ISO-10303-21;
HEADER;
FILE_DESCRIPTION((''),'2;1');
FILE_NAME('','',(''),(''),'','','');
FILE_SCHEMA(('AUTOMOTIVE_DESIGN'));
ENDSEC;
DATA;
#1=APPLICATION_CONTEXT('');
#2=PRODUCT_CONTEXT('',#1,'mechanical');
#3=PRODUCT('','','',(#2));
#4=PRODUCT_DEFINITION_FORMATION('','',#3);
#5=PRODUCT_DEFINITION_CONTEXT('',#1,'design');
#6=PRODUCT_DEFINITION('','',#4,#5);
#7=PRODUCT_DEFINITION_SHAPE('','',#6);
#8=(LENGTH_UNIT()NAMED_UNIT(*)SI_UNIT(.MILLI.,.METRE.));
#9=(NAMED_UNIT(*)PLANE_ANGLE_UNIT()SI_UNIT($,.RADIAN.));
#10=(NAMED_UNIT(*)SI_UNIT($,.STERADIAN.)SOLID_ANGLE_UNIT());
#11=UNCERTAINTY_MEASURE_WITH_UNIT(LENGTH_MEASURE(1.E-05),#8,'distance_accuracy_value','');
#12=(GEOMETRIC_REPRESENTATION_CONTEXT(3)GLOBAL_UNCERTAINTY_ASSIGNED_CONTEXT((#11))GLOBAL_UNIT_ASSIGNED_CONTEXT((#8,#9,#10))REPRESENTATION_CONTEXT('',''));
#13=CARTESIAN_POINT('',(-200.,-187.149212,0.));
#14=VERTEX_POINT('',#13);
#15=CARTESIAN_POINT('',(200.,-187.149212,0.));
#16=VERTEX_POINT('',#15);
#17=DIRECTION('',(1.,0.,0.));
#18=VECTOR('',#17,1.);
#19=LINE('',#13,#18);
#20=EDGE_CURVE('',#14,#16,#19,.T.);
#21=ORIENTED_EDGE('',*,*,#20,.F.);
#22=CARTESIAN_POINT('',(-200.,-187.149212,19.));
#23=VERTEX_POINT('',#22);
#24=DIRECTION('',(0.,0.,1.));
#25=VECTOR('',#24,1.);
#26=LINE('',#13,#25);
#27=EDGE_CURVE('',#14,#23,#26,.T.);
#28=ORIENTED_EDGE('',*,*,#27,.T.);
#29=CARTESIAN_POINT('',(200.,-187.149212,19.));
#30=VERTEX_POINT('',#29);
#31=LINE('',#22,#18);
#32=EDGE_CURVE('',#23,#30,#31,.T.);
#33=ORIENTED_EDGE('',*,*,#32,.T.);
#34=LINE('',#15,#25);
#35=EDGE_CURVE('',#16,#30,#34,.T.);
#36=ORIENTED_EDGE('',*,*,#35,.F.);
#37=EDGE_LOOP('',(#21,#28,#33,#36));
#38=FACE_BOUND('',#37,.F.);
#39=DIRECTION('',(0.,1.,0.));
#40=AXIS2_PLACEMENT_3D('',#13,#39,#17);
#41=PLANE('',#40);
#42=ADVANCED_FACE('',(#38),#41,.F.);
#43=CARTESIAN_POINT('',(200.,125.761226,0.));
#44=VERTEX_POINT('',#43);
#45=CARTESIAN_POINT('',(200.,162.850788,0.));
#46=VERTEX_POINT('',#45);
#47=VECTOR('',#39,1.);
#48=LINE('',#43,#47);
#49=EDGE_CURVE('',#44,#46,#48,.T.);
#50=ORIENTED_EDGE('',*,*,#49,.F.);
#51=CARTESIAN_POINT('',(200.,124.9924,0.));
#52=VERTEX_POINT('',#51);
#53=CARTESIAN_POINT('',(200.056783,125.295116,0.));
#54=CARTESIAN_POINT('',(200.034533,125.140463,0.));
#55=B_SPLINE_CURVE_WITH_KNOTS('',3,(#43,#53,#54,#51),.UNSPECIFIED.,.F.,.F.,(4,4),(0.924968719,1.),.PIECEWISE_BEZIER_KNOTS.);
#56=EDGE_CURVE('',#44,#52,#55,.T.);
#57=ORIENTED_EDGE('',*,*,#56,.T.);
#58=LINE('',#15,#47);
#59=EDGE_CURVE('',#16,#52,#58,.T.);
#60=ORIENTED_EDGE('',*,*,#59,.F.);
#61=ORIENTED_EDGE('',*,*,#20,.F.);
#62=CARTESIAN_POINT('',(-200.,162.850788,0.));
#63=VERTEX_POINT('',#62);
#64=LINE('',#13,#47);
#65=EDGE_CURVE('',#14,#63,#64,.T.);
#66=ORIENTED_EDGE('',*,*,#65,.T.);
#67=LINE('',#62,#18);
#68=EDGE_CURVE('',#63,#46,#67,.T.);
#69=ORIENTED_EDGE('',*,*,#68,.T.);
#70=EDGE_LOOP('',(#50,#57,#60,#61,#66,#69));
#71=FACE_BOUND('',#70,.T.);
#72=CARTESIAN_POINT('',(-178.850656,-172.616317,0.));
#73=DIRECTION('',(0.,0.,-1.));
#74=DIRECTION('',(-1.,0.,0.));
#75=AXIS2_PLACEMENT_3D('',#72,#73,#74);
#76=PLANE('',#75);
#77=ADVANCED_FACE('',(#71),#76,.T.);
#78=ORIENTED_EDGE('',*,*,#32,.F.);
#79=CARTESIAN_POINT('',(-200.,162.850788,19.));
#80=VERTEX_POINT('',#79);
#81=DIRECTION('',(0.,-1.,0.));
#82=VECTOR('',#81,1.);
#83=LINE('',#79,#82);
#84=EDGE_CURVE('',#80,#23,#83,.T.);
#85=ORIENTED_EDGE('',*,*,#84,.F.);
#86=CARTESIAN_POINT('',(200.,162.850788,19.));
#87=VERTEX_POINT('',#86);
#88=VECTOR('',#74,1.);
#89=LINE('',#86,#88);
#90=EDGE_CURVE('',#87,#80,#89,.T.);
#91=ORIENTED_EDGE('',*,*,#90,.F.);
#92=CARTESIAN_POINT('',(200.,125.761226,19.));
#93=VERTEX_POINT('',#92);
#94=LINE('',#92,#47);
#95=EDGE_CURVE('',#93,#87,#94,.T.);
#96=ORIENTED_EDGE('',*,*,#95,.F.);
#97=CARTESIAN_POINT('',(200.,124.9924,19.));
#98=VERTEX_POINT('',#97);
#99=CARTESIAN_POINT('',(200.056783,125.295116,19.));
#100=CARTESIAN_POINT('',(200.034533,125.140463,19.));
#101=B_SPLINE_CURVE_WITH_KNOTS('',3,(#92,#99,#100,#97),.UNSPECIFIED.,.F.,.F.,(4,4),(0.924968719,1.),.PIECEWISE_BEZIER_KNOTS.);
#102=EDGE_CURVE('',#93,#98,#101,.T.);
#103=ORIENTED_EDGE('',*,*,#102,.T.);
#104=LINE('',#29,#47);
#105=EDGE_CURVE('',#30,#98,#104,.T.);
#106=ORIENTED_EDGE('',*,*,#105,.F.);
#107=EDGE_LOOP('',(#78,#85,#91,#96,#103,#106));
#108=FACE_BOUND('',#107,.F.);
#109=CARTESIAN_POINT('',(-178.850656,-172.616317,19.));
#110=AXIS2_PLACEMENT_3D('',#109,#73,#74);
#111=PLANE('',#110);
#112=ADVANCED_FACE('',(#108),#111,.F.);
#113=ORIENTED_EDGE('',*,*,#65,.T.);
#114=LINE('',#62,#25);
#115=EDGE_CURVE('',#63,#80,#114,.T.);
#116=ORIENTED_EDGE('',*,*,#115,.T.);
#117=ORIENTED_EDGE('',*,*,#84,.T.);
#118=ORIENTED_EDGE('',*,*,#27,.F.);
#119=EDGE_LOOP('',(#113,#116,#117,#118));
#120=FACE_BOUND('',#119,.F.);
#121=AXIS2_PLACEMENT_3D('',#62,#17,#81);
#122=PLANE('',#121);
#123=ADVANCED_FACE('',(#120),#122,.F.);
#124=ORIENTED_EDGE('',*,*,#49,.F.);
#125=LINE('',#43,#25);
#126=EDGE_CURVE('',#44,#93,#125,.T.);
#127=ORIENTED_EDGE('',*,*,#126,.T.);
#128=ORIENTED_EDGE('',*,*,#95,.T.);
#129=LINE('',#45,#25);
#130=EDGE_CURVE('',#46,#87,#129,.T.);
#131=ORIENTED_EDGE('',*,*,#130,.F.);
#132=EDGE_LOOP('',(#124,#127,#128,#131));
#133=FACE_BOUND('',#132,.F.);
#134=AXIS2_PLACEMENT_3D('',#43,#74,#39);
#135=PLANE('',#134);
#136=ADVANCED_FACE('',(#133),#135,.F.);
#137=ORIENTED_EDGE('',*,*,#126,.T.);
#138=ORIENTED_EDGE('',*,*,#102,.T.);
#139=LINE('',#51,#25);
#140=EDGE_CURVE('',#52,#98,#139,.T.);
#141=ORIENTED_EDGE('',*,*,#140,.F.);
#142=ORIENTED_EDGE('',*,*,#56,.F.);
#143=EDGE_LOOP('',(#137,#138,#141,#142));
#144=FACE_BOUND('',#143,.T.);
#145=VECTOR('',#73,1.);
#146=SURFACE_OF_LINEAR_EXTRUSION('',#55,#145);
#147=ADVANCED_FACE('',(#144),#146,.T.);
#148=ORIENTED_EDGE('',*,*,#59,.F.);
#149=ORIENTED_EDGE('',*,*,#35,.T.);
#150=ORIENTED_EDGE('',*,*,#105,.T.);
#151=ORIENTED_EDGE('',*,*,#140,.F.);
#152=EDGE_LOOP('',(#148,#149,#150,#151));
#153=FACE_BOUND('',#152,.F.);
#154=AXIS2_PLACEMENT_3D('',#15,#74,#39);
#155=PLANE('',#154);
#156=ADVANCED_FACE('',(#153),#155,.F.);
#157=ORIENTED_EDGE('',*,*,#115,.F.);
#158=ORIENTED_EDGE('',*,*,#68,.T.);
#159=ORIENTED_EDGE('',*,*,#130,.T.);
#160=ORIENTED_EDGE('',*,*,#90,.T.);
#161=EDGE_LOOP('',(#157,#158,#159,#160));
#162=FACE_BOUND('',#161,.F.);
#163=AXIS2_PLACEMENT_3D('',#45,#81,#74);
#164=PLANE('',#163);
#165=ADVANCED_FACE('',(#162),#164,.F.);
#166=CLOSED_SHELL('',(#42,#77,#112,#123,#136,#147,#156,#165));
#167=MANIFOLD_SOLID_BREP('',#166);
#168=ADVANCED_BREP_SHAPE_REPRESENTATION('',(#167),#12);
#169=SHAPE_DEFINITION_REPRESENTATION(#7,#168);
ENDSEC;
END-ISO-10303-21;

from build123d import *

# Parameters (mm, degrees)
F1_DEPTH = 19
F2_DEPTH = 548
F3_DEPTH = 548


# Not quite as in the source:
# - an extrude ends at something that could not be found from the text; its depth is read off the source's solid


with BuildPart() as f1:
    # F0 (on Top) → F1 (new body)
    with BuildSketch(Plane.XY):
        with BuildLine():
            add(Edge.make_bspline(
                [(-200, -132.6209452411), (-200, -154.8058367287), (-187.1411707237, -172.3375741418), (-168.017625666, -187.1492117643), (-133.0151869916, -187.1492117643)],
                knots=[0, 0, 0, 0, 0.4562793143, 1, 1, 1, 1], degree=3))
            Line((-200, -132.6209452411), (-200, -187.1492117643))
            Line((-200, -187.1492117643), (-133.0151869916, -187.1492117643))
        make_face()
        with BuildLine():
            Line((200, -187.1492117643), (200, -133.3316862583))
            add(Edge.make_bspline(
                [(200, -133.3316862583), (196.8726040376, -145.854416396), (194.7195639705, -177.063078406), (166.3433221251, -183.7126432901), (157.4708074331, -187.1492117643)],
                knots=[0, 0, 0, 0, 0.5227747717, 1, 1, 1, 1], degree=3))
            Line((157.4708074331, -187.1492117643), (200, -187.1492117643))
        make_face()
        with BuildLine():
            add(Edge.make_bspline(
                [(200, 125.7612258196), (200.0567834577, 125.2951155246), (200.0345329904, 125.1404634173), (200, 124.9924004078)],
                knots=[0.9249687191, 0.9249687191, 0.9249687191, 0.9249687191, 1, 1, 1, 1], degree=3))
            Line((200, 125.7612258196), (200, 124.9924004078))
        make_face()
        with BuildLine():
            add(Edge.make_bspline(
                [(159.7772687674, 162.8507882357), (169.0774328446, 160.2876502356), (193.3291623418, 156.440564551), (199.6711808851, 128.4603565342), (200, 125.7612258196)],
                knots=[0, 0, 0, 0, 0.4904809229, 0.9249687191, 0.9249687191, 0.9249687191, 0.9249687191], degree=3))
            Line((159.7772687674, 162.8507882357), (-153.6801122603, 162.8507882357))
            add(Edge.make_bspline(
                [(-200, 104.9124646716), (-200, 131.7387589341), (-185.8746875729, 148.9797410683), (-171.5849838132, 162.8507882357), (-153.6801122603, 162.8507882357)],
                knots=[0, 0, 0, 0, 0.5414752597, 1, 1, 1, 1], degree=3))
            Line((-200, 104.9124646716), (-200, -132.6209452411))
            add(Edge.make_bspline(
                [(-200, -132.6209452411), (-200, -154.8058367287), (-187.1411707237, -172.3375741418), (-168.017625666, -187.1492117643), (-133.0151869916, -187.1492117643)],
                knots=[0, 0, 0, 0, 0.4562793143, 1, 1, 1, 1], degree=3))
            Line((-133.0151869916, -187.1492117643), (157.4708074331, -187.1492117643))
            add(Edge.make_bspline(
                [(200, -133.3316862583), (196.8726040376, -145.854416396), (194.7195639705, -177.063078406), (166.3433221251, -183.7126432901), (157.4708074331, -187.1492117643)],
                knots=[0, 0, 0, 0, 0.5227747717, 1, 1, 1, 1], degree=3))
            Line((200, -133.3316862583), (200, 124.9924004078))
            Line((200, 124.9924004078), (200, 125.7612258196))
        make_face()
        with BuildLine():
            add(Edge.make_bspline(
                [(-200, 104.9124646716), (-200, 131.7387589341), (-185.8746875729, 148.9797410683), (-171.5849838132, 162.8507882357), (-153.6801122603, 162.8507882357)],
                knots=[0, 0, 0, 0, 0.5414752597, 1, 1, 1, 1], degree=3))
            Line((-153.6801122603, 162.8507882357), (-200, 162.8507882357))
            Line((-200, 162.8507882357), (-200, 104.9124646716))
        make_face()
        with BuildLine():
            Line((200, 125.7612258196), (200, 162.8507882357))
            Line((200, 162.8507882357), (159.7772687674, 162.8507882357))
            add(Edge.make_bspline(
                [(159.7772687674, 162.8507882357), (169.0774328446, 160.2876502356), (193.3291623418, 156.440564551), (199.6711808851, 128.4603565342), (200, 125.7612258196)],
                knots=[0, 0, 0, 0, 0.4904809229, 0.9249687191, 0.9249687191, 0.9249687191, 0.9249687191], degree=3))
        make_face()
    extrude(amount=F1_DEPTH)

    # F0 (on Top) → F2 (cut, through all)
    with BuildSketch(Plane.XY):
        with BuildLine():
            add(Edge.make_bspline(
                [(-200, -132.6209452411), (-200, -154.8058367287), (-187.1411707237, -172.3375741418), (-168.017625666, -187.1492117643), (-133.0151869916, -187.1492117643)],
                knots=[0, 0, 0, 0, 0.4562793143, 1, 1, 1, 1], degree=3))
            Line((-200, -132.6209452411), (-200, -187.1492117643))
            Line((-200, -187.1492117643), (-133.0151869916, -187.1492117643))
        make_face()
    extrude(amount=-F2_DEPTH, mode=Mode.SUBTRACT)

    # F0 (on Top) → F3 (cut, through all)
    with BuildSketch(Plane.XY):
        with BuildLine():
            add(Edge.make_bspline(
                [(-200, 104.9124646716), (-200, 131.7387589341), (-185.8746875729, 148.9797410683), (-171.5849838132, 162.8507882357), (-153.6801122603, 162.8507882357)],
                knots=[0, 0, 0, 0, 0.5414752597, 1, 1, 1, 1], degree=3))
            Line((-153.6801122603, 162.8507882357), (-200, 162.8507882357))
            Line((-200, 162.8507882357), (-200, 104.9124646716))
        make_face()
    extrude(amount=-F3_DEPTH, mode=Mode.SUBTRACT)


solid = f1.part
